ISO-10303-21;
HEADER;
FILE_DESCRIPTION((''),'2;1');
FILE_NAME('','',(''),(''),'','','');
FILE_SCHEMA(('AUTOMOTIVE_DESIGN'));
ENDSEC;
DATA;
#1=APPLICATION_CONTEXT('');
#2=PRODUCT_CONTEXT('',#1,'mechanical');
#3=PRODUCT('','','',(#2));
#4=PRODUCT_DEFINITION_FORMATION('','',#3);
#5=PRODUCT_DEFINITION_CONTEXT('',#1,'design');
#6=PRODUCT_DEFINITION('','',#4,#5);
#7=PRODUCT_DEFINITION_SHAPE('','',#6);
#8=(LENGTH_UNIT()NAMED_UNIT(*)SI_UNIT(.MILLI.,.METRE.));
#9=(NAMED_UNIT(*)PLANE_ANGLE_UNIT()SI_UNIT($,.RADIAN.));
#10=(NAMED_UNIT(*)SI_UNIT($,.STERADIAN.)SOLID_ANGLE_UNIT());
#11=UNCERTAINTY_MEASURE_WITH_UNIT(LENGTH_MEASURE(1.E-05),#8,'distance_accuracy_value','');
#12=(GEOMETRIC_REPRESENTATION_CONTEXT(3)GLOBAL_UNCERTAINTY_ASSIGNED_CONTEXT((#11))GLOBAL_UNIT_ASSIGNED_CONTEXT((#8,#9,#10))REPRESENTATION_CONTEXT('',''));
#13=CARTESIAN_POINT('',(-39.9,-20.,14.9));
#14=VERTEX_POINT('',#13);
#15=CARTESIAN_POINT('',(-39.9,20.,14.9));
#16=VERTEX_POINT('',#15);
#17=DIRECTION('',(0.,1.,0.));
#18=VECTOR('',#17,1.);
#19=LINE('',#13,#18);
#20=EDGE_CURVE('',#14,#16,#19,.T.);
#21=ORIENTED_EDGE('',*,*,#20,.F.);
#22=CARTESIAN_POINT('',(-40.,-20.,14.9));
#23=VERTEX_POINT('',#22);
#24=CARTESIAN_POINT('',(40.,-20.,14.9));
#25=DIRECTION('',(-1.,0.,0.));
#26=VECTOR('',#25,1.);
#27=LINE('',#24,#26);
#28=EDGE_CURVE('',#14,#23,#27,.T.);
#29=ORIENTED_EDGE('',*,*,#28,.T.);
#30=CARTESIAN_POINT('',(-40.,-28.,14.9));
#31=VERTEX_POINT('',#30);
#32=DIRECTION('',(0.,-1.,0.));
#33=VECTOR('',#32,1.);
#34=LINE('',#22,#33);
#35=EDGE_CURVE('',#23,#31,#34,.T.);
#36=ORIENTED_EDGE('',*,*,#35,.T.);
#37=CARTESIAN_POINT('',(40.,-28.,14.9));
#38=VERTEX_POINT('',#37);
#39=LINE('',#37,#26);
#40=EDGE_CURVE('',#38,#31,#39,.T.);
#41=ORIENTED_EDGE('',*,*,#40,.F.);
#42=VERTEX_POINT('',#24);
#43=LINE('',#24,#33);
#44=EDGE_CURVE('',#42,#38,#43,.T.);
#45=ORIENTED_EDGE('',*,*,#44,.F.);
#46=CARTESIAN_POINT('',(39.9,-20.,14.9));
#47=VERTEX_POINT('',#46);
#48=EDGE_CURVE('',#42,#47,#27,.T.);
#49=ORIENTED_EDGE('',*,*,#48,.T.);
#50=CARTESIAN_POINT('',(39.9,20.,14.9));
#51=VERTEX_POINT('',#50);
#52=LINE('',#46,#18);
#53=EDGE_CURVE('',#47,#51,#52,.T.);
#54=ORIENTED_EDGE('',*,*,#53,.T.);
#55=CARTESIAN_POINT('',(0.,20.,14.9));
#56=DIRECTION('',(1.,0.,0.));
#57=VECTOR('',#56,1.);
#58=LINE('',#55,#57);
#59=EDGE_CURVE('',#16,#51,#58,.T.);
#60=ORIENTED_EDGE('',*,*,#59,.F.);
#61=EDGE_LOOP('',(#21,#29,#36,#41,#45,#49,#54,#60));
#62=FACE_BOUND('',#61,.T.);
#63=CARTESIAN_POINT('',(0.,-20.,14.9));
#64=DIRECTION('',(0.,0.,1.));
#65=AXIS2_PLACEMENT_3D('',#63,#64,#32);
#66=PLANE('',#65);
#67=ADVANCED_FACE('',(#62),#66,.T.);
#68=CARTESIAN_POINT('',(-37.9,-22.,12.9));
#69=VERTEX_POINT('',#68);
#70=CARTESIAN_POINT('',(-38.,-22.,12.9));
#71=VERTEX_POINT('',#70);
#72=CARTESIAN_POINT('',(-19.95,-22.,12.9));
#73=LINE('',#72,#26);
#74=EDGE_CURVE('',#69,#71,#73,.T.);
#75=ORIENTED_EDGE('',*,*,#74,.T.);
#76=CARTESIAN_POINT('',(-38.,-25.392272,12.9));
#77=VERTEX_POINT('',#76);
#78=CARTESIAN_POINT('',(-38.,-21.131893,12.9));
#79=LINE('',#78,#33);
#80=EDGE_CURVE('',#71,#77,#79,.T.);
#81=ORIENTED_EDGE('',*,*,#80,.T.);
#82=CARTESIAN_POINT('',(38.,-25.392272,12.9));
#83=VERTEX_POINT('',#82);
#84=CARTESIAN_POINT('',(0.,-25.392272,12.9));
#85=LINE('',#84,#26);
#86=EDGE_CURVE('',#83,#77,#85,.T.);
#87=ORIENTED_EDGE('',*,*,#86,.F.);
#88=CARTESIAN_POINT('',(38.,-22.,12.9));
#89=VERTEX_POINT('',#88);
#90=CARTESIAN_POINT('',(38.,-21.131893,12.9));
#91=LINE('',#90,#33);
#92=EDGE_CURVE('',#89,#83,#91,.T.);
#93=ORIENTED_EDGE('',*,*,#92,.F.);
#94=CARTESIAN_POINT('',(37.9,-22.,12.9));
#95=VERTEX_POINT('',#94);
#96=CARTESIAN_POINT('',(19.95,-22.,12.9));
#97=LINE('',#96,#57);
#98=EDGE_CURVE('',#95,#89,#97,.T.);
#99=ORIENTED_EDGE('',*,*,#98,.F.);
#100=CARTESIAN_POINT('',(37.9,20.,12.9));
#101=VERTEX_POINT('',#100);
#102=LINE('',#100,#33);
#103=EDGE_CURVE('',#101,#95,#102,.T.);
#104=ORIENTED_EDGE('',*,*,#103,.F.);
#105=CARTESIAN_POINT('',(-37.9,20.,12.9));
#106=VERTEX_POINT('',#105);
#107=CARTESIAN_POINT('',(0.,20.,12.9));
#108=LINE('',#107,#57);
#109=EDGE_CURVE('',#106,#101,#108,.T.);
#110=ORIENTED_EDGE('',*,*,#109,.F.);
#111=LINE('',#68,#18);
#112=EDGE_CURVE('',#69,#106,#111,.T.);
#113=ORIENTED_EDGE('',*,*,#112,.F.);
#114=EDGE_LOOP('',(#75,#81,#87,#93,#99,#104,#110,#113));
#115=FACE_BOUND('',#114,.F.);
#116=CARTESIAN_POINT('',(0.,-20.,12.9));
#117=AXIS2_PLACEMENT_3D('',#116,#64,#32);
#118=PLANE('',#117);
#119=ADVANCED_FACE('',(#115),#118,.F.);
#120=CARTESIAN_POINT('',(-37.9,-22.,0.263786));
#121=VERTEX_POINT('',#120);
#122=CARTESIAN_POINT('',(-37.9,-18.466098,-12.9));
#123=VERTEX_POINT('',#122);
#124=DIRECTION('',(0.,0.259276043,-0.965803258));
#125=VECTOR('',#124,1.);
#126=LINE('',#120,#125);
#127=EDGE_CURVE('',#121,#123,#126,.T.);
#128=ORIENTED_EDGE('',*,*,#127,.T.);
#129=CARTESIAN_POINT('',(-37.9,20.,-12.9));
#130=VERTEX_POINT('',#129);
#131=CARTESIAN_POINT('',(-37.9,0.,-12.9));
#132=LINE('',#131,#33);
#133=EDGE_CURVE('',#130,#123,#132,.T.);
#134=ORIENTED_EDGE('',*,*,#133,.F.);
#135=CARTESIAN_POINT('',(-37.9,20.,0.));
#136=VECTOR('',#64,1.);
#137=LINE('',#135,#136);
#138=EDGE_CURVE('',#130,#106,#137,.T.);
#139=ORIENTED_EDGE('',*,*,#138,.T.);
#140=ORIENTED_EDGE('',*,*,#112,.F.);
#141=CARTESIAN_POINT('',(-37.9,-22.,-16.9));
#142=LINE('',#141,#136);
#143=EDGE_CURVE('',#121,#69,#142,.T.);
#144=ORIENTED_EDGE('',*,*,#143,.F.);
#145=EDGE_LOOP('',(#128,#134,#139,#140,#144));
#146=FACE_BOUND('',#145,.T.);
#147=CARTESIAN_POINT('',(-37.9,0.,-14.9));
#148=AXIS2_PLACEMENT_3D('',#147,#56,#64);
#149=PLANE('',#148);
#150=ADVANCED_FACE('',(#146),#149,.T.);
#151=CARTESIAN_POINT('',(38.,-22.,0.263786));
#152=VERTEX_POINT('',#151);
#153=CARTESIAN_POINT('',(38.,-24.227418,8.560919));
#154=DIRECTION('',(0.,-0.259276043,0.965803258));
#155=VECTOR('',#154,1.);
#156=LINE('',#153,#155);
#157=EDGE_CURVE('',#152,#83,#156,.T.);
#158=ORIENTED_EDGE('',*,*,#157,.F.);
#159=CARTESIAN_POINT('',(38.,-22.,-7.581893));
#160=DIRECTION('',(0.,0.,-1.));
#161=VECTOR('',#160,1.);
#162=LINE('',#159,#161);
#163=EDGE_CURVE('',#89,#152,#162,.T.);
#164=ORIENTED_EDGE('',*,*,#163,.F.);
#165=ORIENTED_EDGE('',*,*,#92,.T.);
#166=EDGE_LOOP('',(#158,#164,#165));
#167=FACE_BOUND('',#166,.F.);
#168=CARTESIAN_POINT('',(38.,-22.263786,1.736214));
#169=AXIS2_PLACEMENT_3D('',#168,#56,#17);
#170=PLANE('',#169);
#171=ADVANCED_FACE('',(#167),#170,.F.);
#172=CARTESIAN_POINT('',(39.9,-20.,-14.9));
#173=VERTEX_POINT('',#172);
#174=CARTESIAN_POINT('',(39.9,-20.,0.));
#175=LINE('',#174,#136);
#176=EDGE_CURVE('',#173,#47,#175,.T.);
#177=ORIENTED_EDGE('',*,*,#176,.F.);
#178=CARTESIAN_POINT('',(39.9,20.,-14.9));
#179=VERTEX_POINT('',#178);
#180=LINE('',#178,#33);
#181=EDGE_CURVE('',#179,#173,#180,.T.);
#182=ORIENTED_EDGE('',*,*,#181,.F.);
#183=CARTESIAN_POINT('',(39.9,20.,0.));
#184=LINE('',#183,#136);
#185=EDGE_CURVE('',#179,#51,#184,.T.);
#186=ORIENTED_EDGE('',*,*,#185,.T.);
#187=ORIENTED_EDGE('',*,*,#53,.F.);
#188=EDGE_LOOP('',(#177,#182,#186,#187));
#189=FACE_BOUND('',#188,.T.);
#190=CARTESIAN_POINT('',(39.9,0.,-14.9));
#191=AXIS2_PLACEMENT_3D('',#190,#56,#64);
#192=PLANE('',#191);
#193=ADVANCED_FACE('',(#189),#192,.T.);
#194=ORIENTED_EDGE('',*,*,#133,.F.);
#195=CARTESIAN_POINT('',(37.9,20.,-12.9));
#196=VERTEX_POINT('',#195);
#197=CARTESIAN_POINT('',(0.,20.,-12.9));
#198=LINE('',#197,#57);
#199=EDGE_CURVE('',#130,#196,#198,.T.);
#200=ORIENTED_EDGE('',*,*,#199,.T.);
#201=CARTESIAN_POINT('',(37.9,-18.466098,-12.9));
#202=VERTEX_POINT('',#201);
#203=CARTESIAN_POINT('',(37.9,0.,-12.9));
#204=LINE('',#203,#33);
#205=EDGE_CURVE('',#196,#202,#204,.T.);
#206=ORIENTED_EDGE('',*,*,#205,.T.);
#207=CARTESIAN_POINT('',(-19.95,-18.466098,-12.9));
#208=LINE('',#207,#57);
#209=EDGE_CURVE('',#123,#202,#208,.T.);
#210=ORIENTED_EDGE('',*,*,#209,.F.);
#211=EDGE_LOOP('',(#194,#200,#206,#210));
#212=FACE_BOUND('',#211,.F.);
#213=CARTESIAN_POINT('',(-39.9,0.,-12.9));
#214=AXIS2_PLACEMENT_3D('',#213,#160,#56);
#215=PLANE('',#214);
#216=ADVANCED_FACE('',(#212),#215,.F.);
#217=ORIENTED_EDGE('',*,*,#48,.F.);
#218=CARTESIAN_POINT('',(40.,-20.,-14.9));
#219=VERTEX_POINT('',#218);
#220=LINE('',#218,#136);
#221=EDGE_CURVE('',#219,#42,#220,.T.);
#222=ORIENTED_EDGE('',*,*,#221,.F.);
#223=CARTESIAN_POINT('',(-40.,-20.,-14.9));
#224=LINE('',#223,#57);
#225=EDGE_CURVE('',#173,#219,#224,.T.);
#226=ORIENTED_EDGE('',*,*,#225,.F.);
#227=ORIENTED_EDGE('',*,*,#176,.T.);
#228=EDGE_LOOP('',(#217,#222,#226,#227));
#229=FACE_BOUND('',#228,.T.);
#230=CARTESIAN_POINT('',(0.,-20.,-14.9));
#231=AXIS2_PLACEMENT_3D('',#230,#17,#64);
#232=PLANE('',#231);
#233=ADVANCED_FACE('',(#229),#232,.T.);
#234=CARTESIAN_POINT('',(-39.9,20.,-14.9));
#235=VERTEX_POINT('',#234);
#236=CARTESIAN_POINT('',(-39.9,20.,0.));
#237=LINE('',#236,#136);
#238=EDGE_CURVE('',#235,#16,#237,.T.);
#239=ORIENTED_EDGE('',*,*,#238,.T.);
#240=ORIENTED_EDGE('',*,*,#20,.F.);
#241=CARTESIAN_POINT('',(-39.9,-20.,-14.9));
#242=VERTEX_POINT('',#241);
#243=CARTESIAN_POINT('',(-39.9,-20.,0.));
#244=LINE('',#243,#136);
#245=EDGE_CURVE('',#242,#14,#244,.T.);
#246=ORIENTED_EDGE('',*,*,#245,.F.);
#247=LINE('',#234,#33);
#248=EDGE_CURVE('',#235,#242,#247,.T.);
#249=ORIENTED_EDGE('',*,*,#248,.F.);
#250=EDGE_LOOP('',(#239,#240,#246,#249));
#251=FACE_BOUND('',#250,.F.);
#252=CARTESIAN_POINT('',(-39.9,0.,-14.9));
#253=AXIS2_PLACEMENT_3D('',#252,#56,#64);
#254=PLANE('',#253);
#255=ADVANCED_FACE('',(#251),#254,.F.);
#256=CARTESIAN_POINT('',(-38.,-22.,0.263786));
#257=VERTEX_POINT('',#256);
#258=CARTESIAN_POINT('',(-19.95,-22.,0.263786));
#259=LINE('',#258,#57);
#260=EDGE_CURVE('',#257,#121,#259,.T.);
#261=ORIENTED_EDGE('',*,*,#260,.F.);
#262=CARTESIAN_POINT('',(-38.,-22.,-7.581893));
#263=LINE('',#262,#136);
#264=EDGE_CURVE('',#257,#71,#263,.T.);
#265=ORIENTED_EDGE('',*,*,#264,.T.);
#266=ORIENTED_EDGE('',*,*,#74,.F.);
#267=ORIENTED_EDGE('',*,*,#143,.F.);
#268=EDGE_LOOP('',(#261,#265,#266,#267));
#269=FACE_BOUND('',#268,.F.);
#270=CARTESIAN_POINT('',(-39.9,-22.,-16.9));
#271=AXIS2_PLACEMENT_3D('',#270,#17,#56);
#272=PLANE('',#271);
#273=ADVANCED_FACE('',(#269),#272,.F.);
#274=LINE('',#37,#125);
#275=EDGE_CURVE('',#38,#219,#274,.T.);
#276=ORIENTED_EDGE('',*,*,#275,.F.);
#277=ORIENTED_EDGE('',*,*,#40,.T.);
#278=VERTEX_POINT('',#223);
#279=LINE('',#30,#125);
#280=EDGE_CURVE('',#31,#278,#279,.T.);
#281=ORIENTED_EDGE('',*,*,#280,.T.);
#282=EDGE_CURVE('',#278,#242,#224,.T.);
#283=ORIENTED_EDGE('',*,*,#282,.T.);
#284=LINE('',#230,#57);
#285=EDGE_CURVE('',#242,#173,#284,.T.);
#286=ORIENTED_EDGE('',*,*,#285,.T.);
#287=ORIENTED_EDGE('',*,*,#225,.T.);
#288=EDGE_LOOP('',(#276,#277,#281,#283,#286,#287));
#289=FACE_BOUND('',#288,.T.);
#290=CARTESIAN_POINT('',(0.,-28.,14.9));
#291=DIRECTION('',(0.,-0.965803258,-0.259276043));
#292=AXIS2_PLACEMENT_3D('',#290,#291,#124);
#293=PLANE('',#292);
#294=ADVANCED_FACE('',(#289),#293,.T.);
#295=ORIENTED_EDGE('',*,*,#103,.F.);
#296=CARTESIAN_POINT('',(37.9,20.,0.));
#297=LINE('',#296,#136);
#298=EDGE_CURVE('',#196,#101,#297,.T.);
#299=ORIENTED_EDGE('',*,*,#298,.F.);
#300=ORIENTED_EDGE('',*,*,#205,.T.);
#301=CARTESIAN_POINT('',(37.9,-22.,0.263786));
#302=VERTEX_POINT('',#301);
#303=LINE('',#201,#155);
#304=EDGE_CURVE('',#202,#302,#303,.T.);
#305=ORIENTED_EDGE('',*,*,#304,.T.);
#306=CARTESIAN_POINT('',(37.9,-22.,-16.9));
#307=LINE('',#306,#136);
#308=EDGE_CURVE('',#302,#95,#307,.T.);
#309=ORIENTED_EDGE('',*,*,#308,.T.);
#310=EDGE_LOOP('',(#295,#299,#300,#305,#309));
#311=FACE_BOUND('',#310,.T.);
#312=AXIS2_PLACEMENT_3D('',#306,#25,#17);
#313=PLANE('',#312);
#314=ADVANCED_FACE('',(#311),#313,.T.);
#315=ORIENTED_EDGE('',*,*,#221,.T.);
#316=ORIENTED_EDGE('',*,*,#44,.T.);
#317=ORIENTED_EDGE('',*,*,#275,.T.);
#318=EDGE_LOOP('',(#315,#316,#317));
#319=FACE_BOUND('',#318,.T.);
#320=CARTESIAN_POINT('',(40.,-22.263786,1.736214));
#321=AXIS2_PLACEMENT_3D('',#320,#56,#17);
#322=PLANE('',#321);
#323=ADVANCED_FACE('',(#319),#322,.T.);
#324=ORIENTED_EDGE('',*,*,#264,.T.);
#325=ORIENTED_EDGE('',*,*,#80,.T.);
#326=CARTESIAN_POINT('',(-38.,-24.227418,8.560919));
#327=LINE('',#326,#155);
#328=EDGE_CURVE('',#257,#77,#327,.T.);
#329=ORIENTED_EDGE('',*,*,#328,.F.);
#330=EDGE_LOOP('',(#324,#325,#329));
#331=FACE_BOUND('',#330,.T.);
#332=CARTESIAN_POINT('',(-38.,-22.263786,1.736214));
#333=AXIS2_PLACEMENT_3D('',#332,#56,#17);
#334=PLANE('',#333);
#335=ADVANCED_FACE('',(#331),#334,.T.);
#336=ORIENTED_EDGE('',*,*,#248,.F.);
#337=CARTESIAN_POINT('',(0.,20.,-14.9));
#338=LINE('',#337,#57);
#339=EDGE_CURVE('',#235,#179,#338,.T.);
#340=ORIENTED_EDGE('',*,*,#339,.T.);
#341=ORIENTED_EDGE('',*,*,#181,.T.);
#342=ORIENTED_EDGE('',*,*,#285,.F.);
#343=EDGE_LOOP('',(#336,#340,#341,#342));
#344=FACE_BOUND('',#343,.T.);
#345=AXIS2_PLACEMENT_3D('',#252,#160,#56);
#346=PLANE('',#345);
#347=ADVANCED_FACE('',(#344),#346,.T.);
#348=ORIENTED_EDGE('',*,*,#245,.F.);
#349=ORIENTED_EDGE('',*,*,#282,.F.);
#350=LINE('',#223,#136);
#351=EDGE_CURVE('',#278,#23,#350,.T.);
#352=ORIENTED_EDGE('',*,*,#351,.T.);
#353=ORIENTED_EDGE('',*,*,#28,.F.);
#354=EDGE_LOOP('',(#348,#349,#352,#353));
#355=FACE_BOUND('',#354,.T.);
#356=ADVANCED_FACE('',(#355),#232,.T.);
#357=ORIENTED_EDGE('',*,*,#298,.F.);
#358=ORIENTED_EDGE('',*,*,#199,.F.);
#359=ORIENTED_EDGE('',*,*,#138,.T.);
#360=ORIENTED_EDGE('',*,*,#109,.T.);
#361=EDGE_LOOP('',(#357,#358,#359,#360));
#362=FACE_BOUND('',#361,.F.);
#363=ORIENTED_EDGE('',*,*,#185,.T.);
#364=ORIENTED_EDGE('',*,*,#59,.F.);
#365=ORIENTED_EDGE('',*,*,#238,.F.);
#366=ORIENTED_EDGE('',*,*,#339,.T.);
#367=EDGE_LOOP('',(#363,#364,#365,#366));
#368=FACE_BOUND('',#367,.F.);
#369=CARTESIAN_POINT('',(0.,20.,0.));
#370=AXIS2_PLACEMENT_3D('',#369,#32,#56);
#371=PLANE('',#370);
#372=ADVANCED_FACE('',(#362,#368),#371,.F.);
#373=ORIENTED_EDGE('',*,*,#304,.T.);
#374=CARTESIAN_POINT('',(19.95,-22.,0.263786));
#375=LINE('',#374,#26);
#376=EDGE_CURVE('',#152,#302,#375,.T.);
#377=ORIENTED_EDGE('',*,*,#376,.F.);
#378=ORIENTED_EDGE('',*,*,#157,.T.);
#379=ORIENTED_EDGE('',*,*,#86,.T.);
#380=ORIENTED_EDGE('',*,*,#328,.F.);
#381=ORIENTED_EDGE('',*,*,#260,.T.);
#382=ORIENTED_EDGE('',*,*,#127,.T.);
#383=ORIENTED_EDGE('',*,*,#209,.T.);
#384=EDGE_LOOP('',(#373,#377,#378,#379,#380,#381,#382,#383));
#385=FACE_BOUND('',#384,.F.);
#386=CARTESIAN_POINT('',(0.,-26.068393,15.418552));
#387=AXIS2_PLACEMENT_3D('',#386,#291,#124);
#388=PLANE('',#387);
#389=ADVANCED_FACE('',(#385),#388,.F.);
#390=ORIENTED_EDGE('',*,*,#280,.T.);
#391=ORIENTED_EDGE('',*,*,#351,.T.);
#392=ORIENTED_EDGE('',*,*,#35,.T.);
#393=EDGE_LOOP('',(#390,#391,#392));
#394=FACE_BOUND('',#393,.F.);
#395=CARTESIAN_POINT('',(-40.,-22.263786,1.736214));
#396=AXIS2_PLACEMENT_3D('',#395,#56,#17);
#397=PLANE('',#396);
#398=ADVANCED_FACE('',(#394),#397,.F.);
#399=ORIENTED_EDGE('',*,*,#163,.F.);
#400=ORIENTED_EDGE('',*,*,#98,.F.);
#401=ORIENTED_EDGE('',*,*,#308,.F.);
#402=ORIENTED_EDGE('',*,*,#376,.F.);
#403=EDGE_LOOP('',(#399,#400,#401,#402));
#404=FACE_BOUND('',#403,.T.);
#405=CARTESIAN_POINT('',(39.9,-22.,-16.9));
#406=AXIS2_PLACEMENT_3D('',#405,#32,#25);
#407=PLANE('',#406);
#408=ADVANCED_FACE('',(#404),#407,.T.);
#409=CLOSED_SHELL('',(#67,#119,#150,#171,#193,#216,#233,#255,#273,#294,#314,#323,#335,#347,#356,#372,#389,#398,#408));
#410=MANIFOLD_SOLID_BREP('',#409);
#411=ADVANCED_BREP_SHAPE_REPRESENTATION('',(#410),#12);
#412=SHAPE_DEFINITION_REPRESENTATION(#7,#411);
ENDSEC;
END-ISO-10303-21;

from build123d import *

# Parameters (mm, degrees)
F0_W        = 79.8
F0_H        = 29.8
F1_DEPTH    = 20
F3_DEPTH    = 40
F4_T        = 2
F4_T3_DEPTH = 33.8


# Not quite as in the source:
# - a shell that OpenCascade refuses in one call is made with other operations: the cavity is built on its own and cut out


with BuildPart() as f1:
    # F0 (on Front) → F1 (new body, symmetric)
    with BuildSketch(Plane.XZ):
        Rectangle(F0_W, F0_H)
    extrude(amount=F1_DEPTH, both=True)

    # F2 (on Right) → F3 (join, symmetric)
    with BuildSketch(Plane.YZ):
        Polygon((-28, 14.9), (-20, -14.9), (-20, 14.9), align=None)
    extrude(amount=F3_DEPTH, both=True)

    # F4: shell of thickness 2, made by hand


with BuildPart() as f4_core1:
    # F4_t2: copy of F1
    add(f1.part)

    # the walls: a layer under each face that stays
    f4_faces = [f4_core1.faces().sort_by_distance(p)[0] for p in [
        (0, -24, 0),
        (-40, -24, 9.9333333333),
        (-39.95, -20, 0),
        (0, 0, -14.9),
        (39.95, -20, 0),
        (40, -24, 9.9333333333),
        (0, -4, 14.9),
        (-39.9, 0, 0),
        (39.9, 0, 0),
    ]]
    thicken(f4_faces, amount=-F4_T, mode=Mode.SUBTRACT)

    # F4_s4 → F4_t3 (cut)
    with BuildSketch(Plane.XY.offset(-16.9)):
        Polygon((-39.92, -19.98), (-39.9, -22), (-37.9, -22), (-37.9, -20), align=None)
        Polygon((39.92, -19.98), (39.9, -22), (37.9, -22), (37.9, -20), align=None)
    extrude(amount=F4_T3_DEPTH, mode=Mode.SUBTRACT)


with BuildPart() as f1_1:
    add(f1.part)

    # what is left inside the walls is the cavity
    f4_cavity = [f4_core1.part.solids().sort_by_distance(p)[0] for p in [
        (-12.666667, -2.696136, 12.88),
    ]]
    add(f4_cavity, mode=Mode.SUBTRACT)


solid = f1_1.part
